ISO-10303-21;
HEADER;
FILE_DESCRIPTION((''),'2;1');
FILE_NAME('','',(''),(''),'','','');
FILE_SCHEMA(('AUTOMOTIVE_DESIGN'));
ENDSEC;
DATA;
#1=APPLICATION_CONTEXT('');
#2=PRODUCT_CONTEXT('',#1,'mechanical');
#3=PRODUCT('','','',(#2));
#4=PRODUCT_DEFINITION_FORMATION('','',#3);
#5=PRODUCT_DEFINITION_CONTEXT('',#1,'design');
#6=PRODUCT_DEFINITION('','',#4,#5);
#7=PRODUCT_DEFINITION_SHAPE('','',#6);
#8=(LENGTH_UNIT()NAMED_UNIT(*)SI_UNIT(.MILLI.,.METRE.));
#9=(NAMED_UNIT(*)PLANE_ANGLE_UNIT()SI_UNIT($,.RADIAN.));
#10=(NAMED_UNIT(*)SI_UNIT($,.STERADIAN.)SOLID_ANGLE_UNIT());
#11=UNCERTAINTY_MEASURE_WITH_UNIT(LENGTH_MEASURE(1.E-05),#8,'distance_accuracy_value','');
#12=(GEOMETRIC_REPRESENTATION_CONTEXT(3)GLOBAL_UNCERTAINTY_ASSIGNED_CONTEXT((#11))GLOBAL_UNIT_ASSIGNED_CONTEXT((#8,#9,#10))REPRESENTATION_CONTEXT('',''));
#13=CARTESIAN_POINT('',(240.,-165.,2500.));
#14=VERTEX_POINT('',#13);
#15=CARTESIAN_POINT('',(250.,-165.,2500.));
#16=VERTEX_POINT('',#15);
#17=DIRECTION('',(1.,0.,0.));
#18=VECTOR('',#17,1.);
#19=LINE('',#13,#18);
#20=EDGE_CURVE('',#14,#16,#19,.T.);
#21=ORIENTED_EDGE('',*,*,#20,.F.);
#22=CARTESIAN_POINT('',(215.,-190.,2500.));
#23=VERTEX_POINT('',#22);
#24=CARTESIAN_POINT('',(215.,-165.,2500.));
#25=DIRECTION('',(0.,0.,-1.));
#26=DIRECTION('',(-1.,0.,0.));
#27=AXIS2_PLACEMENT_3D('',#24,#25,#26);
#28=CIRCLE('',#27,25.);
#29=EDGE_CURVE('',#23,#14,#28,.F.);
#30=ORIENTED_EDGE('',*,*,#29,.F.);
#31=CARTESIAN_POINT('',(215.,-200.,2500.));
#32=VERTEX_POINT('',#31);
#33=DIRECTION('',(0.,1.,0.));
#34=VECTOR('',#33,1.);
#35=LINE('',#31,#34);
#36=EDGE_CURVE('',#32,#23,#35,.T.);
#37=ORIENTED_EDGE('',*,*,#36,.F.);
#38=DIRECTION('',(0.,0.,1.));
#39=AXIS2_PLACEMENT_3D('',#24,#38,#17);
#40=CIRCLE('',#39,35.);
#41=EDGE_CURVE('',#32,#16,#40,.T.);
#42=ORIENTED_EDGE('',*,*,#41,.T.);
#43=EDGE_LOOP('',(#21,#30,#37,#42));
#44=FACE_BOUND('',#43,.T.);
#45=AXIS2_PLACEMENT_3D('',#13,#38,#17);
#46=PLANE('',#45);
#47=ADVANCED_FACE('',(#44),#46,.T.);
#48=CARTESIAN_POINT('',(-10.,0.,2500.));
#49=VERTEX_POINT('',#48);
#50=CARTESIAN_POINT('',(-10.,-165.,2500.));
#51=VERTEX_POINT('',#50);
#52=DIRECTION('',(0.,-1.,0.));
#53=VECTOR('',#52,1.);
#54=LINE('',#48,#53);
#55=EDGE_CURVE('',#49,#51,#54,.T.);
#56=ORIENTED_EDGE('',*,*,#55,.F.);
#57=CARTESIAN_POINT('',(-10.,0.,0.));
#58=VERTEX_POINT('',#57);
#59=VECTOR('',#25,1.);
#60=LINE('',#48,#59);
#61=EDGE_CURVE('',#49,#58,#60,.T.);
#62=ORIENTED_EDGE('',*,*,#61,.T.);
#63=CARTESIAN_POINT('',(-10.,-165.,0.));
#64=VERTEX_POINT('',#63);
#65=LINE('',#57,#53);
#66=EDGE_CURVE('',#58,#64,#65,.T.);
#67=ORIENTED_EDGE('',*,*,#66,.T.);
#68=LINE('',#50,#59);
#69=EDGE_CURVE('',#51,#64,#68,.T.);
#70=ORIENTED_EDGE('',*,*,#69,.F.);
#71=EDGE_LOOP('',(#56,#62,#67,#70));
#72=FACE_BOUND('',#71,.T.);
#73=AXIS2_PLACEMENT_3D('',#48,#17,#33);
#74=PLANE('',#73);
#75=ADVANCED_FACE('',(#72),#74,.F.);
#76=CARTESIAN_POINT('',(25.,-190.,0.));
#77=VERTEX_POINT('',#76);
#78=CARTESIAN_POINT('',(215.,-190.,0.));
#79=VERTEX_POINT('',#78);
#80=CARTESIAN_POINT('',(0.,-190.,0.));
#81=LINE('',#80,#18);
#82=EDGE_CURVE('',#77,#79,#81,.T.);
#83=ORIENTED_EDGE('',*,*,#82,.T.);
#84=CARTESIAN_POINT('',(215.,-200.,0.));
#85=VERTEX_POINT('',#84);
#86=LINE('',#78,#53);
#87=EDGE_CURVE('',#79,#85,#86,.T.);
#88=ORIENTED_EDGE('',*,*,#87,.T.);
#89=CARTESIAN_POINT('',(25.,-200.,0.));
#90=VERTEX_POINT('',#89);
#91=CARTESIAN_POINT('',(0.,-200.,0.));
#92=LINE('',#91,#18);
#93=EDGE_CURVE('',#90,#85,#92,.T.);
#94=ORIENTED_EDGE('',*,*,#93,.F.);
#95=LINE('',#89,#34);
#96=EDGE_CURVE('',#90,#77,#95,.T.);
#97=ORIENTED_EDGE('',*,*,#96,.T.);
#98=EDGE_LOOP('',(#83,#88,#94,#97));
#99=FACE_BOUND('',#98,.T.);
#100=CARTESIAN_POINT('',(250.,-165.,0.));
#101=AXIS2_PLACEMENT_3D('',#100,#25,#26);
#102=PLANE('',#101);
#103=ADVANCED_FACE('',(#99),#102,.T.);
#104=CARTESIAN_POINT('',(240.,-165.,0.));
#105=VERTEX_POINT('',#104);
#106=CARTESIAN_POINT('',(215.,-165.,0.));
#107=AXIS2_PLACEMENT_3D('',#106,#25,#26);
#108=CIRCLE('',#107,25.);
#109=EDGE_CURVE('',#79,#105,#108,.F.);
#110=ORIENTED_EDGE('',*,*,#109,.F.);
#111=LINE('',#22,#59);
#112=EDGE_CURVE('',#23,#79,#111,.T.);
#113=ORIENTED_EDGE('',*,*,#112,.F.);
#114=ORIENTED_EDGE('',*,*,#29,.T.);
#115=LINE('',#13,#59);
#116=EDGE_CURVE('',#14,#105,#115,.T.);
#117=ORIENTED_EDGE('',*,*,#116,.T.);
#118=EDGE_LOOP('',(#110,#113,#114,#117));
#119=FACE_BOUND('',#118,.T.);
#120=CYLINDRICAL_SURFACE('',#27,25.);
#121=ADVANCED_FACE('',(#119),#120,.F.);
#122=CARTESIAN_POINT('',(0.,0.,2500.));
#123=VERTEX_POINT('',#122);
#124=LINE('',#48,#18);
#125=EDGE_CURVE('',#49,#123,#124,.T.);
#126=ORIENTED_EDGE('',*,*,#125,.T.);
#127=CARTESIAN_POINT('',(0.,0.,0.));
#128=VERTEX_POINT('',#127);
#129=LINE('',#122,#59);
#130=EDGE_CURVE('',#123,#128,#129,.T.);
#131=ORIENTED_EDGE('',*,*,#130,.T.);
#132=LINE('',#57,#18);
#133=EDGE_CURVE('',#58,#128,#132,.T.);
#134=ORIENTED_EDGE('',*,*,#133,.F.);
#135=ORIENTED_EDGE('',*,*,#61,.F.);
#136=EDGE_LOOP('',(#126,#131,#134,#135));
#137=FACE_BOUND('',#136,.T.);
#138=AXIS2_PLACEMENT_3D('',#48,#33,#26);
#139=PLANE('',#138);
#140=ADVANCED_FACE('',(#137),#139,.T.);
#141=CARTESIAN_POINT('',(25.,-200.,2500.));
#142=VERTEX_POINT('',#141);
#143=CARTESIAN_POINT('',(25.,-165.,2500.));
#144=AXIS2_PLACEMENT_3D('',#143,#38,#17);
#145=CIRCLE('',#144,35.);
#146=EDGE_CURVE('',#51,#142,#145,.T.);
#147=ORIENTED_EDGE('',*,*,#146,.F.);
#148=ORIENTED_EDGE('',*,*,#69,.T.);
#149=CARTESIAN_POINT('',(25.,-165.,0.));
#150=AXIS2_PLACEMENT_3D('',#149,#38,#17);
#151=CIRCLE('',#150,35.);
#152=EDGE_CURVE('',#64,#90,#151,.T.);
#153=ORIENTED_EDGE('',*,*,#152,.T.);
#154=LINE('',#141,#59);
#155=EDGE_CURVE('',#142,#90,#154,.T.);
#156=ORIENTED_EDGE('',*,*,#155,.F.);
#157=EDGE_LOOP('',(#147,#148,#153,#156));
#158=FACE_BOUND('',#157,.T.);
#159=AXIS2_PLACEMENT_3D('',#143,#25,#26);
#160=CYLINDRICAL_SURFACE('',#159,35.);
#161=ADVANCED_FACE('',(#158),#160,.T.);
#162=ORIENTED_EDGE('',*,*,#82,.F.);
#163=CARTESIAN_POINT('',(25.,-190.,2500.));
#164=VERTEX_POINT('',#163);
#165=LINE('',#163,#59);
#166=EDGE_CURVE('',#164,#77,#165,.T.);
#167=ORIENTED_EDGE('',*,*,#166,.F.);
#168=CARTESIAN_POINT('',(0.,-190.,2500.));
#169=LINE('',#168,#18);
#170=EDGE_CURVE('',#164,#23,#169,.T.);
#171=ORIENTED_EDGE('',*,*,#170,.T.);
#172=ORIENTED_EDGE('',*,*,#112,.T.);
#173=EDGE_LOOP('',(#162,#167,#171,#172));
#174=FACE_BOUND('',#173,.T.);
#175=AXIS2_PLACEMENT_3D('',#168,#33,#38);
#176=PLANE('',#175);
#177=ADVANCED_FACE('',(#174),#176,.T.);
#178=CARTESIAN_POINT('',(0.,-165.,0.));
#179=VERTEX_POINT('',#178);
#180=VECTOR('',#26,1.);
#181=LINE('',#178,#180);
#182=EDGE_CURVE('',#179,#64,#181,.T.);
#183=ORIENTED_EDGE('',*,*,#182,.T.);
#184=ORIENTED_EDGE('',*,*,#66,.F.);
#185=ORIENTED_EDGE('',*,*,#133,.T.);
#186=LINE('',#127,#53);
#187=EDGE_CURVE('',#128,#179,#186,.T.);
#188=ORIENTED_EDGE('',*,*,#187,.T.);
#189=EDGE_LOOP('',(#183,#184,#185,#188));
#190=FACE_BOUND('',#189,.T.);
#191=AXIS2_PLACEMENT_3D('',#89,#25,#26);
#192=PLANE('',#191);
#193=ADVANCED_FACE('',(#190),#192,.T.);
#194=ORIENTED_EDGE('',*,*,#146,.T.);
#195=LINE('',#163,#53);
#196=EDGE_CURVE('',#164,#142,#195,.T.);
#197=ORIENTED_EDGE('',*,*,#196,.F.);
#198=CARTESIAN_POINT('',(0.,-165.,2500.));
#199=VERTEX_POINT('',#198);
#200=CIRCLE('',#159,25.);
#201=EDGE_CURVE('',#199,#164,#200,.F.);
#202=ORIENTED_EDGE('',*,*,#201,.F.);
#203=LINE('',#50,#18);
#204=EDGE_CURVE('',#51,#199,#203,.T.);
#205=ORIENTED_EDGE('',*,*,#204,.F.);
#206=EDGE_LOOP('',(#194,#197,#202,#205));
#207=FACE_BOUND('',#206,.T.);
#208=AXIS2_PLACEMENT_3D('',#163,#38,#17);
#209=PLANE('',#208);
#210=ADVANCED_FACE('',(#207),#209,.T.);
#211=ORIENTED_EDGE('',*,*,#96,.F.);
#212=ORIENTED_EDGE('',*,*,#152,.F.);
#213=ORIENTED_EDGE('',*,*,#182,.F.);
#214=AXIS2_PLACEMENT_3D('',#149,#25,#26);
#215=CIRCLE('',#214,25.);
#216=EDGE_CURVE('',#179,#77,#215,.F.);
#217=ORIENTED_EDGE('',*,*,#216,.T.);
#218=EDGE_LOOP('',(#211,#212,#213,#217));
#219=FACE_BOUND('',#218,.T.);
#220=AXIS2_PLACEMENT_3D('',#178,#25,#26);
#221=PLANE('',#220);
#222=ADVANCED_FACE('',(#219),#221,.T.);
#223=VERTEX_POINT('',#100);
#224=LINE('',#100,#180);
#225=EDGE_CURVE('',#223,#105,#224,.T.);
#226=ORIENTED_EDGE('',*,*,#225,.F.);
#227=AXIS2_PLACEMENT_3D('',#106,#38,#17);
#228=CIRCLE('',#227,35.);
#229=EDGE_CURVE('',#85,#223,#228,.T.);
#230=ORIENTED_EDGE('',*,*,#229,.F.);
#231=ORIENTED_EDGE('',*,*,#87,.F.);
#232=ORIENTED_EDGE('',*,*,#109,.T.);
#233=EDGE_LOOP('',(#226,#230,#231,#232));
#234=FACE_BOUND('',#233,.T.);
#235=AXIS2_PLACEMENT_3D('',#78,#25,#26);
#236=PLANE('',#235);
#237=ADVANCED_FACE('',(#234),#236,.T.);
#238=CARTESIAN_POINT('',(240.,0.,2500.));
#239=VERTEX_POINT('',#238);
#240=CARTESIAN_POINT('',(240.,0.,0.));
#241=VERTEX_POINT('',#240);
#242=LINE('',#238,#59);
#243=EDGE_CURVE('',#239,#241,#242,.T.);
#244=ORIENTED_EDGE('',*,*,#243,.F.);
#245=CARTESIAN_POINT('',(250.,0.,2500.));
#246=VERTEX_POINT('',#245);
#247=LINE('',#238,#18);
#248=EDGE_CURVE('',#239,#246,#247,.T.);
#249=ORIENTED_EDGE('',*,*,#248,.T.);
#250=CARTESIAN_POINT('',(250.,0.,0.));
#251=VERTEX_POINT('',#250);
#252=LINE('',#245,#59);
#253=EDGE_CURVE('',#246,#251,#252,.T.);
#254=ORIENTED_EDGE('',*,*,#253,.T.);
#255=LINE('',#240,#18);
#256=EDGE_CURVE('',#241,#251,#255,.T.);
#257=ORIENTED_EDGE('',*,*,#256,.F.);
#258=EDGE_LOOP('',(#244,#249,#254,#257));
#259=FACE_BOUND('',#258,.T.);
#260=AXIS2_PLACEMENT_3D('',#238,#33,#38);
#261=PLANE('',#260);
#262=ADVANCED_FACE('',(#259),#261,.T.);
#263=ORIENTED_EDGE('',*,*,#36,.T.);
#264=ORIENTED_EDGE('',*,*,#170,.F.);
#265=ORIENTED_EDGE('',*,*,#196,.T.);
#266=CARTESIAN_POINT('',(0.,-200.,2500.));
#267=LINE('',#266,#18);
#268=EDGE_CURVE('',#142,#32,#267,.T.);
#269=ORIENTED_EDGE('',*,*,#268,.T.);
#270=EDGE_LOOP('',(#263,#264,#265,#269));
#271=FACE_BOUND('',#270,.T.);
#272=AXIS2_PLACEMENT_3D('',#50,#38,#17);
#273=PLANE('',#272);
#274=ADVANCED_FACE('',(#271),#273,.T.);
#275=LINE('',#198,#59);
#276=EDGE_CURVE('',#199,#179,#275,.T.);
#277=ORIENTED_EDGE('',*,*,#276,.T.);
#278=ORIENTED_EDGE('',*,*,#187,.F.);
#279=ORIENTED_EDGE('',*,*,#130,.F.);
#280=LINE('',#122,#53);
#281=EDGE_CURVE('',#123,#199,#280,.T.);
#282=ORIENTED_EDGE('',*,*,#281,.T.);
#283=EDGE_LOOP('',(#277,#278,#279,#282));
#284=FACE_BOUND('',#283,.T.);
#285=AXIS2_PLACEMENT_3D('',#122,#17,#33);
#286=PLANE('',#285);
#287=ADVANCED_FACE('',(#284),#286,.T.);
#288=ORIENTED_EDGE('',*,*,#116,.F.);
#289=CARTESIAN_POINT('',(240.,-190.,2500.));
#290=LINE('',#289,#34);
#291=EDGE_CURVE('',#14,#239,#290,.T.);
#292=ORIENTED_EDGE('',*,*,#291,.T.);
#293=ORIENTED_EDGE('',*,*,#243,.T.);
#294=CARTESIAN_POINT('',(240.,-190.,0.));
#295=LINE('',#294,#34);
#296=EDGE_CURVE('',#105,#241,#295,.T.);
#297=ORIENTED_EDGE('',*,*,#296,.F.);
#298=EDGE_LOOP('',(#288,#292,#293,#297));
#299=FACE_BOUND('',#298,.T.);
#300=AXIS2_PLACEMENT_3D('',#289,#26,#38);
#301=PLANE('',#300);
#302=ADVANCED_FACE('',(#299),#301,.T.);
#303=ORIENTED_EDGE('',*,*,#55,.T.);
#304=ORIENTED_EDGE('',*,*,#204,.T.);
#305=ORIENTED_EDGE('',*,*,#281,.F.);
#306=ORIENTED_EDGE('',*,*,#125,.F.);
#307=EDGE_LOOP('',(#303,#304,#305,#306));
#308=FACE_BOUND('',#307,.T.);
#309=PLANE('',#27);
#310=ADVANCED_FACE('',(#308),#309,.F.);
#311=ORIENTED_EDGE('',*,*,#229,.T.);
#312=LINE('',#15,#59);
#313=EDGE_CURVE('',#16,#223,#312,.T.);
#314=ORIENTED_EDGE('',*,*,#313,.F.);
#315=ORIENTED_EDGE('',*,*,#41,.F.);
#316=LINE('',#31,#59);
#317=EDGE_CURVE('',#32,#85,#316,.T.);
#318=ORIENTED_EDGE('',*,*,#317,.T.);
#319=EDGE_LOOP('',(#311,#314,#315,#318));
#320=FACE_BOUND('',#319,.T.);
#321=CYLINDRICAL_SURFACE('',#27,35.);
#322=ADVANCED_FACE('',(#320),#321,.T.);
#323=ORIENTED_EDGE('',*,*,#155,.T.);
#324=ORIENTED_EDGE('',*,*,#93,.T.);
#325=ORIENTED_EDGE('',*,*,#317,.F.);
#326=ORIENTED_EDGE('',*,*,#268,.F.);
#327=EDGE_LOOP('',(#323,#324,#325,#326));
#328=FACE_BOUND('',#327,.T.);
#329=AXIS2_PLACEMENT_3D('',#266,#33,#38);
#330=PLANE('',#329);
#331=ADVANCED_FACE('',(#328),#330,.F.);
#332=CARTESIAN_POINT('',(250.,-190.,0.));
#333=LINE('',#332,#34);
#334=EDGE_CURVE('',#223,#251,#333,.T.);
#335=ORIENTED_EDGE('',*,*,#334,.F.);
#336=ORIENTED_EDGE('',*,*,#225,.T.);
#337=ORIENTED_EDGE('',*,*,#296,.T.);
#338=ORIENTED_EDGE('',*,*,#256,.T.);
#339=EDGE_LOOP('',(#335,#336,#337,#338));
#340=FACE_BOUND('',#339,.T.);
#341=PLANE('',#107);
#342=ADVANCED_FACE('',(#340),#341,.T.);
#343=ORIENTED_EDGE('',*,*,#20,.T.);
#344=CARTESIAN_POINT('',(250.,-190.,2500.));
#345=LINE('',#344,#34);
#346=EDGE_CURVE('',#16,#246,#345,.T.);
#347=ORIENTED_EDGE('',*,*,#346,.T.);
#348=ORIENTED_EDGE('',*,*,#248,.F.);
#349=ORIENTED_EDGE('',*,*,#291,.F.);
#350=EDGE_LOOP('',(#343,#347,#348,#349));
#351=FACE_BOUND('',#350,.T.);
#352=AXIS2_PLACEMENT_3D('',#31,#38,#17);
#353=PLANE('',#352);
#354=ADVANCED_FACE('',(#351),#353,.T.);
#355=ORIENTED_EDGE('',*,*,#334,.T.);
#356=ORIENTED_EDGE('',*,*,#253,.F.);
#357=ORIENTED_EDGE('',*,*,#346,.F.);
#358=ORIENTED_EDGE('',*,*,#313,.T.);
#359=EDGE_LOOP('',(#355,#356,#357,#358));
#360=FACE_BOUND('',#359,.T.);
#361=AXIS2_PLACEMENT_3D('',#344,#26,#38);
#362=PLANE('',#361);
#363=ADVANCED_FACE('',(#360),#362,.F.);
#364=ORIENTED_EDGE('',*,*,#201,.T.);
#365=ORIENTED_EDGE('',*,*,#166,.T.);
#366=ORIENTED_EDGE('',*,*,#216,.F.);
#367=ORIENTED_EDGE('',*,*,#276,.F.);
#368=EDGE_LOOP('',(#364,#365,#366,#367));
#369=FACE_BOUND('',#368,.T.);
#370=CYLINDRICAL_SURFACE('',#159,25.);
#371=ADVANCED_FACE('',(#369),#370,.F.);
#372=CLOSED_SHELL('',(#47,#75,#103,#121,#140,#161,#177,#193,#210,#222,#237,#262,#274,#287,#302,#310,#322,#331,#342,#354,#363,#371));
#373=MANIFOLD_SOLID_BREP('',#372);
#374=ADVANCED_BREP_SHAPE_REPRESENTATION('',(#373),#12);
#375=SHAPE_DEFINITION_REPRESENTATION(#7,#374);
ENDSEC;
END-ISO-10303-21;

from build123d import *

# Parameters (mm, degrees)
TABAN_FLAN_1_DEPTH = 2500


# Sheet-metal steps are written as plain solids
with BuildPart() as part:
    # Çizim1 → Taban-Flanş1 (new body)
    with BuildSketch(Plane.XY):
        with BuildLine():
            Line((0, 0), (0, -165))
            ThreePointArc((0, -165), (7.32233047, -182.67766953), (25, -190))
            Line((25, -190), (215, -190))
            ThreePointArc((215, -190), (232.67766953, -182.67766953), (240, -165))
            Line((240, -165), (240, 0))
            Line((240, 0), (250, 0))
            Line((250, 0), (250, -165))
            ThreePointArc((250, -165), (239.748737342, -189.748737342), (215, -200))
            Line((215, -200), (25, -200))
            ThreePointArc((25, -200), (0.251262658, -189.748737342), (-10, -165))
            Line((-10, -165), (-10, 0))
            Line((-10, 0), (0, 0))
        make_face()
    extrude(amount=TABAN_FLAN_1_DEPTH)


solid = part.part
